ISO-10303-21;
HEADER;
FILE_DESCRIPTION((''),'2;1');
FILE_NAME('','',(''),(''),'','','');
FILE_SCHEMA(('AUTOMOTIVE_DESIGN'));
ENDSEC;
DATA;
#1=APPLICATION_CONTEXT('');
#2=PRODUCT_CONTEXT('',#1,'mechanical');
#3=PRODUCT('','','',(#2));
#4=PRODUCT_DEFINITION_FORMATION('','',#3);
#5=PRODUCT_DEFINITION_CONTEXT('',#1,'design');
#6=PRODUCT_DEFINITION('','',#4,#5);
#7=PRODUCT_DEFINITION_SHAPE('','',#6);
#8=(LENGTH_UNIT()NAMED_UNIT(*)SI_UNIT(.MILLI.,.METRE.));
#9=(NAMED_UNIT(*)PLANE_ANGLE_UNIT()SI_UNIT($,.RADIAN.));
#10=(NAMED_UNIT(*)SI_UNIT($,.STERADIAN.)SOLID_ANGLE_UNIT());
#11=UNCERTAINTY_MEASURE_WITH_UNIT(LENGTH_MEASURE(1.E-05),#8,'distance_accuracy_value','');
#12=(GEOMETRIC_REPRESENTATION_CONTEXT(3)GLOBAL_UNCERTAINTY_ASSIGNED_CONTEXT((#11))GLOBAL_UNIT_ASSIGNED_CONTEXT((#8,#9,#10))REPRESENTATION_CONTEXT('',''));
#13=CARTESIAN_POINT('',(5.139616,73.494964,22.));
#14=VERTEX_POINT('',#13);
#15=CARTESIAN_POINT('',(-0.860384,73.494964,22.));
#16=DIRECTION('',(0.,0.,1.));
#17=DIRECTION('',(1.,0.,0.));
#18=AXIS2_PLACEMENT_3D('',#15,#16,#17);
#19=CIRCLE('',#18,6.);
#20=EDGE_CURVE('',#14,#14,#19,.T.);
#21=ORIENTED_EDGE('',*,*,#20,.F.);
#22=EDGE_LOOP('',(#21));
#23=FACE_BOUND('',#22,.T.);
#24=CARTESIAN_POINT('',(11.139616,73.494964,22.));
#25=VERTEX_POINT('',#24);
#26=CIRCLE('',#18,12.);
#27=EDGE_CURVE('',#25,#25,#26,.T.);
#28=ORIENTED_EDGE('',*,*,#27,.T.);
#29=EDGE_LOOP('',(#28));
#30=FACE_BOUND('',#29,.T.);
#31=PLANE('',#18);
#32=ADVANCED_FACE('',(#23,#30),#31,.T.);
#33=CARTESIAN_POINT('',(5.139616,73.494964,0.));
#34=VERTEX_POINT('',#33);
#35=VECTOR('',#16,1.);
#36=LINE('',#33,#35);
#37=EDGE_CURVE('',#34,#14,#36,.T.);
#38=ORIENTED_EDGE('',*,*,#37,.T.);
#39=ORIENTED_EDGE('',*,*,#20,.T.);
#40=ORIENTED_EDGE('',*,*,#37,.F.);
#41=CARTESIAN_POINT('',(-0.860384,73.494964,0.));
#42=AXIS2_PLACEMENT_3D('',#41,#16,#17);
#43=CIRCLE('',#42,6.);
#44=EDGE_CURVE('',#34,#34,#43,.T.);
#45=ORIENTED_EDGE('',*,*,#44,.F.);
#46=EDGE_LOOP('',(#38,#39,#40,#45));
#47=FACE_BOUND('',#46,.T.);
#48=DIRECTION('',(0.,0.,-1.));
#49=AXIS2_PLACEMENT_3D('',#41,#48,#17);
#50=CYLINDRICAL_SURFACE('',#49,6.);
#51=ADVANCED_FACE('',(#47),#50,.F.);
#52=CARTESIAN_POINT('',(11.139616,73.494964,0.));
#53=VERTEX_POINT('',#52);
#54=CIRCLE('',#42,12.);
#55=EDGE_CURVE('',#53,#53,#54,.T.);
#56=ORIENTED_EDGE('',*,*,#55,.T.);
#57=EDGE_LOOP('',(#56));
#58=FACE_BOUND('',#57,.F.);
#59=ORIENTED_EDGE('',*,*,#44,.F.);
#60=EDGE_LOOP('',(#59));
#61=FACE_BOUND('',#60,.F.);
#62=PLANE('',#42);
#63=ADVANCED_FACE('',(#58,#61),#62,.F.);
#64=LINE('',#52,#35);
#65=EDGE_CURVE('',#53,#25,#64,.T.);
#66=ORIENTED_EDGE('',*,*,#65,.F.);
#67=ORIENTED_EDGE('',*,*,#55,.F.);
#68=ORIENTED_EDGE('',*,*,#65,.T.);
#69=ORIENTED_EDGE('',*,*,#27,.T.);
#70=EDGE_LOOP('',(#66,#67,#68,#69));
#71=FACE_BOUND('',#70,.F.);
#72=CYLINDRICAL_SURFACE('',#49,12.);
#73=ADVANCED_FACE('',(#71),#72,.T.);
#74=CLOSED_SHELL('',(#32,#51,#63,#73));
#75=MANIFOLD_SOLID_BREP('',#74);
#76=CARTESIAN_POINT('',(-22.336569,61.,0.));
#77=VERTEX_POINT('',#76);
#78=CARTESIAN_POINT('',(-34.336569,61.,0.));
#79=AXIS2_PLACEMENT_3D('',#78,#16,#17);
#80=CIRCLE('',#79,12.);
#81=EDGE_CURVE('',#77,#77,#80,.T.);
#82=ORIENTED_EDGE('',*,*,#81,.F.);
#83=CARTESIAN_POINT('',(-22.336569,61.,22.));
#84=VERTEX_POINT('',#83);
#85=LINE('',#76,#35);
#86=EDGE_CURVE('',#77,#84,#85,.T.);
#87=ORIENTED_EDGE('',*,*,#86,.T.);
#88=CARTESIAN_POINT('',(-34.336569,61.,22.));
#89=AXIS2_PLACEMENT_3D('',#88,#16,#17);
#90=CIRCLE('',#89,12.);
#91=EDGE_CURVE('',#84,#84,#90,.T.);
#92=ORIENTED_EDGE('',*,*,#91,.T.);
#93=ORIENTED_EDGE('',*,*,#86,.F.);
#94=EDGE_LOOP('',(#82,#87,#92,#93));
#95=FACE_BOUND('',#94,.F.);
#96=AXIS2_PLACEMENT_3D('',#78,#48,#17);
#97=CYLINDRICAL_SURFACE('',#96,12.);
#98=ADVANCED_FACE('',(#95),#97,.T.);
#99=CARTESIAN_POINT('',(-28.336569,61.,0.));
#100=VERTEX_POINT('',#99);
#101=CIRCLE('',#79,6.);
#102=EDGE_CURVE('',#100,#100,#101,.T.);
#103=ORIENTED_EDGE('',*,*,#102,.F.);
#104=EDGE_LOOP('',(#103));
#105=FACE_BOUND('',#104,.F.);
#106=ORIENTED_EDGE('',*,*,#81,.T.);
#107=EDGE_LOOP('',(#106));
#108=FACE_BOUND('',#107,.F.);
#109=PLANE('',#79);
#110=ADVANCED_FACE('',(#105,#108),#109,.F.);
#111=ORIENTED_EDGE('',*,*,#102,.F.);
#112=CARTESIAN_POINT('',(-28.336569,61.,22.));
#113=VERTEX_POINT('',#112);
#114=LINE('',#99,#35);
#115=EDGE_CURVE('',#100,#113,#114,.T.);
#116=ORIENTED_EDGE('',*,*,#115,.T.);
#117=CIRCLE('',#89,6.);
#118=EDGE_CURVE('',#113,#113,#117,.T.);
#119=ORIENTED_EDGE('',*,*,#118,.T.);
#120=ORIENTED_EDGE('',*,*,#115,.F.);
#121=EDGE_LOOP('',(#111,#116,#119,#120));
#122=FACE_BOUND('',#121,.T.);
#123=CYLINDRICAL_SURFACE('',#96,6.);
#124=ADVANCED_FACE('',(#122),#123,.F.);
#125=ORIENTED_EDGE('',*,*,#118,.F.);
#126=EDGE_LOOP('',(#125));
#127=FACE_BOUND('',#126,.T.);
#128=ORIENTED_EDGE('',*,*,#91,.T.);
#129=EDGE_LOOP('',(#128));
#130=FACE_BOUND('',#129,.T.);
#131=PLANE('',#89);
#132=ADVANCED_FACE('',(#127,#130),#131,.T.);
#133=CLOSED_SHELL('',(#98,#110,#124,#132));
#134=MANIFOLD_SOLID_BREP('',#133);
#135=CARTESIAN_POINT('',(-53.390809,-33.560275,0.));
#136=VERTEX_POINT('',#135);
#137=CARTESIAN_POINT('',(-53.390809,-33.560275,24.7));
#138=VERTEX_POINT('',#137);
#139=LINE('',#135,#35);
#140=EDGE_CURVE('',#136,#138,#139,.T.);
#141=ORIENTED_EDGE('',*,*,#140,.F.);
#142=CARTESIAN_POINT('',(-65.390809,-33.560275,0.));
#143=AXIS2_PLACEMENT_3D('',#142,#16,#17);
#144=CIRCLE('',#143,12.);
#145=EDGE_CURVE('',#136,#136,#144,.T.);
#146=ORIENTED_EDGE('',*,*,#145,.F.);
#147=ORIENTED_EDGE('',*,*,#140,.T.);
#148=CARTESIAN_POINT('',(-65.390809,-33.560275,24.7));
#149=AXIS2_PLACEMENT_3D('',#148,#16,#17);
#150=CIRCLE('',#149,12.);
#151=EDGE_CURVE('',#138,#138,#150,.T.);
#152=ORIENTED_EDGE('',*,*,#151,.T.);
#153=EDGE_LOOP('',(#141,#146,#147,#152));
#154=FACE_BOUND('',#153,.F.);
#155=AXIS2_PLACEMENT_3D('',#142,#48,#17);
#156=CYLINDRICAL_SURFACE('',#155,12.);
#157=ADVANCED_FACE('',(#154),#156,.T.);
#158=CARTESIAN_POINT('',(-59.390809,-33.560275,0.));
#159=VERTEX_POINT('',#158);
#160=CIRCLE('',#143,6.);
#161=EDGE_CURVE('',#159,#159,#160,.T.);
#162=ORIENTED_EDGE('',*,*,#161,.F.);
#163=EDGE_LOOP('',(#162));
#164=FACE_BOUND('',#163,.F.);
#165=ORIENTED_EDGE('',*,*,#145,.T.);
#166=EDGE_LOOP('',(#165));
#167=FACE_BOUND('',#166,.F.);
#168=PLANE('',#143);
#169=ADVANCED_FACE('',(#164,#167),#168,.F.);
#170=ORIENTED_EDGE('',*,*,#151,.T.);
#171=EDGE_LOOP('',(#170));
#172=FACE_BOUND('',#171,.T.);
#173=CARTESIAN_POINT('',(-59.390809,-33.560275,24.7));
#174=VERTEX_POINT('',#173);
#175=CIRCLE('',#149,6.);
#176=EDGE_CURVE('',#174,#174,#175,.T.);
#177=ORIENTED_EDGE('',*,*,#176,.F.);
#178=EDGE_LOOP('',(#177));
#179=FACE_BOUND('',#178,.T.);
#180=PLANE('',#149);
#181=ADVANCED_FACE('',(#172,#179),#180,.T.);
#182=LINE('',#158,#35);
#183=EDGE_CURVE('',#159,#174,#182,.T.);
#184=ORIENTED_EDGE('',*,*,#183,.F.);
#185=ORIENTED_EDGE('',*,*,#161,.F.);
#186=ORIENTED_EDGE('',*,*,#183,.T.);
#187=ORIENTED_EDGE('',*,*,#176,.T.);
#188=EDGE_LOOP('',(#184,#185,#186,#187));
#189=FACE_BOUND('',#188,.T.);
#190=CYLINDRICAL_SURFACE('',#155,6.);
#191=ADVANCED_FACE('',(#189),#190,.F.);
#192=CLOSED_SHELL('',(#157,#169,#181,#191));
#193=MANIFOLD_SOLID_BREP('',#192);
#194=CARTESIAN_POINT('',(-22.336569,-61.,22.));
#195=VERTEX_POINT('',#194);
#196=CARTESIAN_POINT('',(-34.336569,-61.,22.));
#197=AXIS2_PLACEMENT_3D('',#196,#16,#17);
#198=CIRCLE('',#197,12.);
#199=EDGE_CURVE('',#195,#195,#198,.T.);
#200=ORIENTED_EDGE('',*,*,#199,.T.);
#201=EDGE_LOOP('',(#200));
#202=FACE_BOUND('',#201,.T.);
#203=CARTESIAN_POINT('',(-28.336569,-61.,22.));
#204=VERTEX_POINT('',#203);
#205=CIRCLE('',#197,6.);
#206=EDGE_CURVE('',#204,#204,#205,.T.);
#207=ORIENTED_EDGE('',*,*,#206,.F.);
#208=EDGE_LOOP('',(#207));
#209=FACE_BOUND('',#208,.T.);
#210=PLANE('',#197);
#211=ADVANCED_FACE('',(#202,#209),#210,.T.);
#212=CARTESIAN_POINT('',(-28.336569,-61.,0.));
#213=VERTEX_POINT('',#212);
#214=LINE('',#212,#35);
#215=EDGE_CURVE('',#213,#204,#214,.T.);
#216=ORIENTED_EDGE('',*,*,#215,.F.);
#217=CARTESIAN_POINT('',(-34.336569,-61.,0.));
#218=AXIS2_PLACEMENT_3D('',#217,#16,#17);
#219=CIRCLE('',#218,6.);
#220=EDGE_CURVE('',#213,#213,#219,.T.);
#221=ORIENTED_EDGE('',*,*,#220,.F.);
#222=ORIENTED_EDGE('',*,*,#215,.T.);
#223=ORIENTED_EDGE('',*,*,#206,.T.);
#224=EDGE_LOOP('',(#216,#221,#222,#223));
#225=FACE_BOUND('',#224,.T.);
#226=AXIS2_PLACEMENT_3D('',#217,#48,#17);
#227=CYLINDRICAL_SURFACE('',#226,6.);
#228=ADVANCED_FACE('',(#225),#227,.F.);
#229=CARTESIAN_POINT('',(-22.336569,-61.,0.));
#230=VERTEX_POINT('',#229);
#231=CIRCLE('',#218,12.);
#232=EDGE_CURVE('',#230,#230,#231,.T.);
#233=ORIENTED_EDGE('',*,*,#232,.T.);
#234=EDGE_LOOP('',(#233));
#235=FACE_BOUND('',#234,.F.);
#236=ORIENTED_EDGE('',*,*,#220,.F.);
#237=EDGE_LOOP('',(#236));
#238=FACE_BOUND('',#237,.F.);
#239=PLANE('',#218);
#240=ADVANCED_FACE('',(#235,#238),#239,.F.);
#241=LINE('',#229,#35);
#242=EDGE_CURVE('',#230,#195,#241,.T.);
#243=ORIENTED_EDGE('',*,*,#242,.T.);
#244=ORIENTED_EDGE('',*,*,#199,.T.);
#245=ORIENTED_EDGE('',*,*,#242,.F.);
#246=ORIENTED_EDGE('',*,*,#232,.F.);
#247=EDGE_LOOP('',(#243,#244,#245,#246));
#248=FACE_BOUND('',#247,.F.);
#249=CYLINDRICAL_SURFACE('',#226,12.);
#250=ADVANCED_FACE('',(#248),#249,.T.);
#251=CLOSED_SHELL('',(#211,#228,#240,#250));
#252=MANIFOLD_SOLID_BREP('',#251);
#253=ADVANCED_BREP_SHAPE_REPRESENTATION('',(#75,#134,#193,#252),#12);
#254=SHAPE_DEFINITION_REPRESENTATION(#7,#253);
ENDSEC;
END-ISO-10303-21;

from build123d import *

# Parameters (mm, degrees)
F0_R     = 12
F0_R_2   = 6
F1_DEPTH = 22
F2_DEPTH = 24.7


# Not quite as in the source:
# - a feature names something its author has since deleted; it is built from what else it names


with BuildPart() as f1:
    # F0 (on Top) → F1 (new body)
    with BuildSketch(Plane.XY):
        with Locations((-34.3365694268, 61)):
            Circle(F0_R)
        with Locations((-34.3365694268, 61)):
            Circle(F0_R_2, mode=Mode.SUBTRACT)
    extrude(amount=F1_DEPTH)


with BuildPart() as f1b:
    # F0 (on Top) → F1, piece 2 (new body)
    with BuildSketch(Plane.XY):
        with Locations((-34.3365694268, -61)):
            Circle(F0_R)
        with Locations((-34.3365694268, -61)):
            Circle(F0_R_2, mode=Mode.SUBTRACT)
    extrude(amount=F1_DEPTH)


with BuildPart() as f1c:
    # F0 (on Top) → F1, piece 3 (new body)
    with BuildSketch(Plane.XY):
        with Locations((-0.860383961, 73.4949640414)):
            Circle(F0_R)
        with Locations((-0.860383961, 73.4949640414)):
            Circle(F0_R_2, mode=Mode.SUBTRACT)
    extrude(amount=F1_DEPTH)


with BuildPart() as f2:
    # F0 (on Top) → F2 (new body)
    with BuildSketch(Plane.XY):
        with Locations((-65.3908093134, -33.5602749889)):
            Circle(F0_R)
        with Locations((-65.3908093134, -33.5602749889)):
            Circle(F0_R_2, mode=Mode.SUBTRACT)
    extrude(amount=F2_DEPTH)


solid = Compound([f1.part, f1b.part, f1c.part, f2.part])
